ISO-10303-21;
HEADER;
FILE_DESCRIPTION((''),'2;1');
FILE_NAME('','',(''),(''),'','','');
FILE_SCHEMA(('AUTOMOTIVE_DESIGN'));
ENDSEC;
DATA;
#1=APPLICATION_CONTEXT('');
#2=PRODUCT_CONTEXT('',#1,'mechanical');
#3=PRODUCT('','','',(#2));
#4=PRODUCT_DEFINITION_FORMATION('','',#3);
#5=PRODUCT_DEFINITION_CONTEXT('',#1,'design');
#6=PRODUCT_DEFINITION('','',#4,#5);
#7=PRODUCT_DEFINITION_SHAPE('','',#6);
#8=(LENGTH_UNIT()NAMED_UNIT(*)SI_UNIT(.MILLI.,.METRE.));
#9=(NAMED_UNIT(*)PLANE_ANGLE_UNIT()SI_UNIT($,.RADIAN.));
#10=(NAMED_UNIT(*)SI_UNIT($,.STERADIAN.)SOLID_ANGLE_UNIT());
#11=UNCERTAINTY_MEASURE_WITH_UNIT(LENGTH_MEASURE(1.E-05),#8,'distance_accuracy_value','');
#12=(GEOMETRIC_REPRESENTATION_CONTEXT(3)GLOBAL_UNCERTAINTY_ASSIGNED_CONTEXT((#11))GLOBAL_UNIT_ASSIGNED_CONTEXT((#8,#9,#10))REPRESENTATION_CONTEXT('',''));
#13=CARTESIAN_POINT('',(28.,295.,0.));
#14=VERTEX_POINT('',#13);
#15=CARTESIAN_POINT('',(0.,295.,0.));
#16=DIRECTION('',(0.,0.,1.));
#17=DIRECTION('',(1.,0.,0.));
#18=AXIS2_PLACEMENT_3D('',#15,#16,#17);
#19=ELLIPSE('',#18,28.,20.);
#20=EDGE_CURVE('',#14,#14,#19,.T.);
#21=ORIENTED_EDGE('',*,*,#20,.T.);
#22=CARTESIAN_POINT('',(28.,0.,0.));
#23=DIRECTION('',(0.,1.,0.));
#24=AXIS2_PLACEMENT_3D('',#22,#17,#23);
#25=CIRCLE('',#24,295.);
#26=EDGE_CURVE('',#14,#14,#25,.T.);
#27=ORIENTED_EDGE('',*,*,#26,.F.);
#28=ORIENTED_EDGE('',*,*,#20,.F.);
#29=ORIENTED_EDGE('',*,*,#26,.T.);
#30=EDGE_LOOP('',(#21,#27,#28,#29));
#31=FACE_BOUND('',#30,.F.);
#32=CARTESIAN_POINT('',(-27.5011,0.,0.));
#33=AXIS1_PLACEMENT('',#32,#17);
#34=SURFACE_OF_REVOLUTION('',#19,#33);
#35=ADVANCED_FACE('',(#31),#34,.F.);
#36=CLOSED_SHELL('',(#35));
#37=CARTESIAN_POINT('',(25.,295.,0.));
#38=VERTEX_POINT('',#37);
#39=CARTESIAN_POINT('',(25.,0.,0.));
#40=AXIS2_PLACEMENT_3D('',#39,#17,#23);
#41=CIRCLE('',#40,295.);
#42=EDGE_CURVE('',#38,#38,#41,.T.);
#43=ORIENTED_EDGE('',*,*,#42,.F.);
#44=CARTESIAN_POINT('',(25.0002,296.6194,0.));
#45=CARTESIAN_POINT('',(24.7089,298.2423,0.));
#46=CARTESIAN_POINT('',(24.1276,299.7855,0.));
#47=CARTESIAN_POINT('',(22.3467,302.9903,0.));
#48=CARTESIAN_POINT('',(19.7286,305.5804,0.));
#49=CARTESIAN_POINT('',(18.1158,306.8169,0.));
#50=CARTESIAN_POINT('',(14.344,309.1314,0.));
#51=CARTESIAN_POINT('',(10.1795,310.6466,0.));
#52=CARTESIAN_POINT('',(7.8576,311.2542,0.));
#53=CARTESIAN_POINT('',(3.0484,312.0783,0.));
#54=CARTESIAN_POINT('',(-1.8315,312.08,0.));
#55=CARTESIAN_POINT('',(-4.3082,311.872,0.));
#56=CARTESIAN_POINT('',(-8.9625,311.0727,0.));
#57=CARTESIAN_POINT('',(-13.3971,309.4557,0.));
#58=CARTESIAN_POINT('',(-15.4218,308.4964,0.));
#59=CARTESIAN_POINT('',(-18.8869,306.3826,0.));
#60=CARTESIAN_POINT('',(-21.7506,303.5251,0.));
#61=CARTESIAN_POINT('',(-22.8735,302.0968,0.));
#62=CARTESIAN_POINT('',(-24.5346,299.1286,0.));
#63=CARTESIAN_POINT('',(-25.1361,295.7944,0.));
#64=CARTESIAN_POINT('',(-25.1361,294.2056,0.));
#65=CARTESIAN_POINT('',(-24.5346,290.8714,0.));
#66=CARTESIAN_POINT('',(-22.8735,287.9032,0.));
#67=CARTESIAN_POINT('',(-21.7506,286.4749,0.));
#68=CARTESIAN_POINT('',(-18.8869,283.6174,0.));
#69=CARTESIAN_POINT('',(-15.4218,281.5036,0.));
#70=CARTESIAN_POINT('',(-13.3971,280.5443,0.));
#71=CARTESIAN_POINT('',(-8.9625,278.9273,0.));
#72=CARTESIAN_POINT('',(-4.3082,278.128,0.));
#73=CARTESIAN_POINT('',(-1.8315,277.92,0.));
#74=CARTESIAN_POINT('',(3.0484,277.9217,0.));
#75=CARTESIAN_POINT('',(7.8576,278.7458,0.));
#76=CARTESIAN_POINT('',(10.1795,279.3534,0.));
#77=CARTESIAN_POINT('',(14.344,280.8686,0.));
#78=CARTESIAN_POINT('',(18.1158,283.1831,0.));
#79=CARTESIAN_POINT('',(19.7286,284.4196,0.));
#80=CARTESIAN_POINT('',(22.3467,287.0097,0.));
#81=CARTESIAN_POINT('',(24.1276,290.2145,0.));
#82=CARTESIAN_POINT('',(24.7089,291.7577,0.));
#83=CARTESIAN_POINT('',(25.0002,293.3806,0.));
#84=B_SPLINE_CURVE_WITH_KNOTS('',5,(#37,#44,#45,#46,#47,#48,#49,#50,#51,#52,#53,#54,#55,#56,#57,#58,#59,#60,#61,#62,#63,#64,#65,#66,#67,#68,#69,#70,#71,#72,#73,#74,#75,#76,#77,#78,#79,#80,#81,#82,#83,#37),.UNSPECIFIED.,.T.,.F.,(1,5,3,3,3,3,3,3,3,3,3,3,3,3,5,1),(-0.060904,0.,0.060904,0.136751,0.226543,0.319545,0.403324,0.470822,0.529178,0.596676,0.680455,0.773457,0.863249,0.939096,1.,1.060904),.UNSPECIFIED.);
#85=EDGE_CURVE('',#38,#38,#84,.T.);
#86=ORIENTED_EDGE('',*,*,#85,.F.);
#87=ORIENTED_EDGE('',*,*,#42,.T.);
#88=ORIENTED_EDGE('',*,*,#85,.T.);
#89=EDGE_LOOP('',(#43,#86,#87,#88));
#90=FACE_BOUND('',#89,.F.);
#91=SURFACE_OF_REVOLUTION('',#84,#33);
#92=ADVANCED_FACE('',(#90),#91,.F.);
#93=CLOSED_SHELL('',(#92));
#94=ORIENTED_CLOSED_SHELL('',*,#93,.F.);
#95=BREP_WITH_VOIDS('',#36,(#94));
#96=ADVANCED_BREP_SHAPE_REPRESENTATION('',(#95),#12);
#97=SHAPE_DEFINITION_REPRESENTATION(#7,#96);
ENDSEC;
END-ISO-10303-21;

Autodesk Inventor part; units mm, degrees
ref_plane "YZ Plane" through (0, 0, 0) normal (1, 0, 0) x (0, 1, 0)
ref_plane "XZ Plane" through (0, 0, 0) normal (0, 1, 0) x (-1, 0, 0)
ref_plane "XY Plane" through (0, 0, 0) normal (0, 0, 1) x (1, 0, 0)
sketch "Boceto1" plane through (0, 0, 0) normal (0, 0, 1) x (1, 0, 0)
  spline S0 degree 5 poles (-24.9404, 274.1789) (-19.9523, 272.5074) (-14.9642, 271.2537) (-9.9761, 270.4179) (0, 269.5821) (9.9761, 270.4179) (14.9642, 271.2537) (19.9523, 272.5074) (24.9404, 274.1789) knots 0 0 0 0 0 0 25.288037 25.288037 25.288037 50.576075 50.576075 50.576075 50.576075 50.576075 50.576075 projected
  line L0 (-27.5011, 282.6709) -> (-27.5011, 0) projected
  line L1 (27.5011, 0) -> (27.5011, 282.6709) projected
  ellipse E0 centre (0, 295) end of major axis (28, 295) minor radius 20
  line L2 (-27.5011, 0) -> (27.5011, 0)
  spline S1 degree 5 poles (25, 295) (25.0002, 296.6194) (24.7089, 298.2423) (24.1276, 299.7855) (22.3467, 302.9903) (19.7286, 305.5804) (18.1158, 306.8169) (14.344, 309.1314) (10.1795, 310.6466) (7.8576, 311.2542) (3.0484, 312.0783) (-1.8315, 312.08) (-4.3082, 311.872) (-8.9625, 311.0727) (-13.3971, 309.4557) (-15.4218, 308.4964) (-18.8869, 306.3826) (-21.7506, 303.5251) (-22.8735, 302.0968) (-24.5346, 299.1286) (-25.1361, 295.7944) (-25.1361, 294.2056) (-24.5346, 290.8714) (-22.8735, 287.9032) (-21.7506, 286.4749) (-18.8869, 283.6174) (-15.4218, 281.5036) (-13.3971, 280.5443) (-8.9625, 278.9273) (-4.3082, 278.128) (-1.8315, 277.92) (3.0484, 277.9217) (7.8576, 278.7458) (10.1795, 279.3534) (14.344, 280.8686) (18.1158, 283.1831) (19.7286, 284.4196) (22.3467, 287.0097) (24.1276, 290.2145) (24.7089, 291.7577) (25.0002, 293.3806) (25, 295) knots 0 0 0 0 0 0 0.060904 0.060904 0.060904 0.136751 0.136751 0.136751 0.226543 0.226543 0.226543 0.319545 0.319545 0.319545 0.403324 0.403324 0.403324 0.470822 0.470822 0.470822 0.529178 0.529178 0.529178 0.596676 0.596676 0.596676 0.680455 0.680455 0.680455 0.773457 0.773457 0.773457 0.863249 0.863249 0.863249 0.939096 0.939096 0.939096 1 1 1 1 1 1
  point P0 (0, 0)
  dimension "d0" = 28
  dimension "d1" = 20
  dimension "d2" = 295
  dimension "d4" = 3
revolve "Revolución1" add sketch "Boceto1" angle 360 about axis through (-27.5011, 0, 0) along (1, 0, 0)
properties part number "neumatico"
